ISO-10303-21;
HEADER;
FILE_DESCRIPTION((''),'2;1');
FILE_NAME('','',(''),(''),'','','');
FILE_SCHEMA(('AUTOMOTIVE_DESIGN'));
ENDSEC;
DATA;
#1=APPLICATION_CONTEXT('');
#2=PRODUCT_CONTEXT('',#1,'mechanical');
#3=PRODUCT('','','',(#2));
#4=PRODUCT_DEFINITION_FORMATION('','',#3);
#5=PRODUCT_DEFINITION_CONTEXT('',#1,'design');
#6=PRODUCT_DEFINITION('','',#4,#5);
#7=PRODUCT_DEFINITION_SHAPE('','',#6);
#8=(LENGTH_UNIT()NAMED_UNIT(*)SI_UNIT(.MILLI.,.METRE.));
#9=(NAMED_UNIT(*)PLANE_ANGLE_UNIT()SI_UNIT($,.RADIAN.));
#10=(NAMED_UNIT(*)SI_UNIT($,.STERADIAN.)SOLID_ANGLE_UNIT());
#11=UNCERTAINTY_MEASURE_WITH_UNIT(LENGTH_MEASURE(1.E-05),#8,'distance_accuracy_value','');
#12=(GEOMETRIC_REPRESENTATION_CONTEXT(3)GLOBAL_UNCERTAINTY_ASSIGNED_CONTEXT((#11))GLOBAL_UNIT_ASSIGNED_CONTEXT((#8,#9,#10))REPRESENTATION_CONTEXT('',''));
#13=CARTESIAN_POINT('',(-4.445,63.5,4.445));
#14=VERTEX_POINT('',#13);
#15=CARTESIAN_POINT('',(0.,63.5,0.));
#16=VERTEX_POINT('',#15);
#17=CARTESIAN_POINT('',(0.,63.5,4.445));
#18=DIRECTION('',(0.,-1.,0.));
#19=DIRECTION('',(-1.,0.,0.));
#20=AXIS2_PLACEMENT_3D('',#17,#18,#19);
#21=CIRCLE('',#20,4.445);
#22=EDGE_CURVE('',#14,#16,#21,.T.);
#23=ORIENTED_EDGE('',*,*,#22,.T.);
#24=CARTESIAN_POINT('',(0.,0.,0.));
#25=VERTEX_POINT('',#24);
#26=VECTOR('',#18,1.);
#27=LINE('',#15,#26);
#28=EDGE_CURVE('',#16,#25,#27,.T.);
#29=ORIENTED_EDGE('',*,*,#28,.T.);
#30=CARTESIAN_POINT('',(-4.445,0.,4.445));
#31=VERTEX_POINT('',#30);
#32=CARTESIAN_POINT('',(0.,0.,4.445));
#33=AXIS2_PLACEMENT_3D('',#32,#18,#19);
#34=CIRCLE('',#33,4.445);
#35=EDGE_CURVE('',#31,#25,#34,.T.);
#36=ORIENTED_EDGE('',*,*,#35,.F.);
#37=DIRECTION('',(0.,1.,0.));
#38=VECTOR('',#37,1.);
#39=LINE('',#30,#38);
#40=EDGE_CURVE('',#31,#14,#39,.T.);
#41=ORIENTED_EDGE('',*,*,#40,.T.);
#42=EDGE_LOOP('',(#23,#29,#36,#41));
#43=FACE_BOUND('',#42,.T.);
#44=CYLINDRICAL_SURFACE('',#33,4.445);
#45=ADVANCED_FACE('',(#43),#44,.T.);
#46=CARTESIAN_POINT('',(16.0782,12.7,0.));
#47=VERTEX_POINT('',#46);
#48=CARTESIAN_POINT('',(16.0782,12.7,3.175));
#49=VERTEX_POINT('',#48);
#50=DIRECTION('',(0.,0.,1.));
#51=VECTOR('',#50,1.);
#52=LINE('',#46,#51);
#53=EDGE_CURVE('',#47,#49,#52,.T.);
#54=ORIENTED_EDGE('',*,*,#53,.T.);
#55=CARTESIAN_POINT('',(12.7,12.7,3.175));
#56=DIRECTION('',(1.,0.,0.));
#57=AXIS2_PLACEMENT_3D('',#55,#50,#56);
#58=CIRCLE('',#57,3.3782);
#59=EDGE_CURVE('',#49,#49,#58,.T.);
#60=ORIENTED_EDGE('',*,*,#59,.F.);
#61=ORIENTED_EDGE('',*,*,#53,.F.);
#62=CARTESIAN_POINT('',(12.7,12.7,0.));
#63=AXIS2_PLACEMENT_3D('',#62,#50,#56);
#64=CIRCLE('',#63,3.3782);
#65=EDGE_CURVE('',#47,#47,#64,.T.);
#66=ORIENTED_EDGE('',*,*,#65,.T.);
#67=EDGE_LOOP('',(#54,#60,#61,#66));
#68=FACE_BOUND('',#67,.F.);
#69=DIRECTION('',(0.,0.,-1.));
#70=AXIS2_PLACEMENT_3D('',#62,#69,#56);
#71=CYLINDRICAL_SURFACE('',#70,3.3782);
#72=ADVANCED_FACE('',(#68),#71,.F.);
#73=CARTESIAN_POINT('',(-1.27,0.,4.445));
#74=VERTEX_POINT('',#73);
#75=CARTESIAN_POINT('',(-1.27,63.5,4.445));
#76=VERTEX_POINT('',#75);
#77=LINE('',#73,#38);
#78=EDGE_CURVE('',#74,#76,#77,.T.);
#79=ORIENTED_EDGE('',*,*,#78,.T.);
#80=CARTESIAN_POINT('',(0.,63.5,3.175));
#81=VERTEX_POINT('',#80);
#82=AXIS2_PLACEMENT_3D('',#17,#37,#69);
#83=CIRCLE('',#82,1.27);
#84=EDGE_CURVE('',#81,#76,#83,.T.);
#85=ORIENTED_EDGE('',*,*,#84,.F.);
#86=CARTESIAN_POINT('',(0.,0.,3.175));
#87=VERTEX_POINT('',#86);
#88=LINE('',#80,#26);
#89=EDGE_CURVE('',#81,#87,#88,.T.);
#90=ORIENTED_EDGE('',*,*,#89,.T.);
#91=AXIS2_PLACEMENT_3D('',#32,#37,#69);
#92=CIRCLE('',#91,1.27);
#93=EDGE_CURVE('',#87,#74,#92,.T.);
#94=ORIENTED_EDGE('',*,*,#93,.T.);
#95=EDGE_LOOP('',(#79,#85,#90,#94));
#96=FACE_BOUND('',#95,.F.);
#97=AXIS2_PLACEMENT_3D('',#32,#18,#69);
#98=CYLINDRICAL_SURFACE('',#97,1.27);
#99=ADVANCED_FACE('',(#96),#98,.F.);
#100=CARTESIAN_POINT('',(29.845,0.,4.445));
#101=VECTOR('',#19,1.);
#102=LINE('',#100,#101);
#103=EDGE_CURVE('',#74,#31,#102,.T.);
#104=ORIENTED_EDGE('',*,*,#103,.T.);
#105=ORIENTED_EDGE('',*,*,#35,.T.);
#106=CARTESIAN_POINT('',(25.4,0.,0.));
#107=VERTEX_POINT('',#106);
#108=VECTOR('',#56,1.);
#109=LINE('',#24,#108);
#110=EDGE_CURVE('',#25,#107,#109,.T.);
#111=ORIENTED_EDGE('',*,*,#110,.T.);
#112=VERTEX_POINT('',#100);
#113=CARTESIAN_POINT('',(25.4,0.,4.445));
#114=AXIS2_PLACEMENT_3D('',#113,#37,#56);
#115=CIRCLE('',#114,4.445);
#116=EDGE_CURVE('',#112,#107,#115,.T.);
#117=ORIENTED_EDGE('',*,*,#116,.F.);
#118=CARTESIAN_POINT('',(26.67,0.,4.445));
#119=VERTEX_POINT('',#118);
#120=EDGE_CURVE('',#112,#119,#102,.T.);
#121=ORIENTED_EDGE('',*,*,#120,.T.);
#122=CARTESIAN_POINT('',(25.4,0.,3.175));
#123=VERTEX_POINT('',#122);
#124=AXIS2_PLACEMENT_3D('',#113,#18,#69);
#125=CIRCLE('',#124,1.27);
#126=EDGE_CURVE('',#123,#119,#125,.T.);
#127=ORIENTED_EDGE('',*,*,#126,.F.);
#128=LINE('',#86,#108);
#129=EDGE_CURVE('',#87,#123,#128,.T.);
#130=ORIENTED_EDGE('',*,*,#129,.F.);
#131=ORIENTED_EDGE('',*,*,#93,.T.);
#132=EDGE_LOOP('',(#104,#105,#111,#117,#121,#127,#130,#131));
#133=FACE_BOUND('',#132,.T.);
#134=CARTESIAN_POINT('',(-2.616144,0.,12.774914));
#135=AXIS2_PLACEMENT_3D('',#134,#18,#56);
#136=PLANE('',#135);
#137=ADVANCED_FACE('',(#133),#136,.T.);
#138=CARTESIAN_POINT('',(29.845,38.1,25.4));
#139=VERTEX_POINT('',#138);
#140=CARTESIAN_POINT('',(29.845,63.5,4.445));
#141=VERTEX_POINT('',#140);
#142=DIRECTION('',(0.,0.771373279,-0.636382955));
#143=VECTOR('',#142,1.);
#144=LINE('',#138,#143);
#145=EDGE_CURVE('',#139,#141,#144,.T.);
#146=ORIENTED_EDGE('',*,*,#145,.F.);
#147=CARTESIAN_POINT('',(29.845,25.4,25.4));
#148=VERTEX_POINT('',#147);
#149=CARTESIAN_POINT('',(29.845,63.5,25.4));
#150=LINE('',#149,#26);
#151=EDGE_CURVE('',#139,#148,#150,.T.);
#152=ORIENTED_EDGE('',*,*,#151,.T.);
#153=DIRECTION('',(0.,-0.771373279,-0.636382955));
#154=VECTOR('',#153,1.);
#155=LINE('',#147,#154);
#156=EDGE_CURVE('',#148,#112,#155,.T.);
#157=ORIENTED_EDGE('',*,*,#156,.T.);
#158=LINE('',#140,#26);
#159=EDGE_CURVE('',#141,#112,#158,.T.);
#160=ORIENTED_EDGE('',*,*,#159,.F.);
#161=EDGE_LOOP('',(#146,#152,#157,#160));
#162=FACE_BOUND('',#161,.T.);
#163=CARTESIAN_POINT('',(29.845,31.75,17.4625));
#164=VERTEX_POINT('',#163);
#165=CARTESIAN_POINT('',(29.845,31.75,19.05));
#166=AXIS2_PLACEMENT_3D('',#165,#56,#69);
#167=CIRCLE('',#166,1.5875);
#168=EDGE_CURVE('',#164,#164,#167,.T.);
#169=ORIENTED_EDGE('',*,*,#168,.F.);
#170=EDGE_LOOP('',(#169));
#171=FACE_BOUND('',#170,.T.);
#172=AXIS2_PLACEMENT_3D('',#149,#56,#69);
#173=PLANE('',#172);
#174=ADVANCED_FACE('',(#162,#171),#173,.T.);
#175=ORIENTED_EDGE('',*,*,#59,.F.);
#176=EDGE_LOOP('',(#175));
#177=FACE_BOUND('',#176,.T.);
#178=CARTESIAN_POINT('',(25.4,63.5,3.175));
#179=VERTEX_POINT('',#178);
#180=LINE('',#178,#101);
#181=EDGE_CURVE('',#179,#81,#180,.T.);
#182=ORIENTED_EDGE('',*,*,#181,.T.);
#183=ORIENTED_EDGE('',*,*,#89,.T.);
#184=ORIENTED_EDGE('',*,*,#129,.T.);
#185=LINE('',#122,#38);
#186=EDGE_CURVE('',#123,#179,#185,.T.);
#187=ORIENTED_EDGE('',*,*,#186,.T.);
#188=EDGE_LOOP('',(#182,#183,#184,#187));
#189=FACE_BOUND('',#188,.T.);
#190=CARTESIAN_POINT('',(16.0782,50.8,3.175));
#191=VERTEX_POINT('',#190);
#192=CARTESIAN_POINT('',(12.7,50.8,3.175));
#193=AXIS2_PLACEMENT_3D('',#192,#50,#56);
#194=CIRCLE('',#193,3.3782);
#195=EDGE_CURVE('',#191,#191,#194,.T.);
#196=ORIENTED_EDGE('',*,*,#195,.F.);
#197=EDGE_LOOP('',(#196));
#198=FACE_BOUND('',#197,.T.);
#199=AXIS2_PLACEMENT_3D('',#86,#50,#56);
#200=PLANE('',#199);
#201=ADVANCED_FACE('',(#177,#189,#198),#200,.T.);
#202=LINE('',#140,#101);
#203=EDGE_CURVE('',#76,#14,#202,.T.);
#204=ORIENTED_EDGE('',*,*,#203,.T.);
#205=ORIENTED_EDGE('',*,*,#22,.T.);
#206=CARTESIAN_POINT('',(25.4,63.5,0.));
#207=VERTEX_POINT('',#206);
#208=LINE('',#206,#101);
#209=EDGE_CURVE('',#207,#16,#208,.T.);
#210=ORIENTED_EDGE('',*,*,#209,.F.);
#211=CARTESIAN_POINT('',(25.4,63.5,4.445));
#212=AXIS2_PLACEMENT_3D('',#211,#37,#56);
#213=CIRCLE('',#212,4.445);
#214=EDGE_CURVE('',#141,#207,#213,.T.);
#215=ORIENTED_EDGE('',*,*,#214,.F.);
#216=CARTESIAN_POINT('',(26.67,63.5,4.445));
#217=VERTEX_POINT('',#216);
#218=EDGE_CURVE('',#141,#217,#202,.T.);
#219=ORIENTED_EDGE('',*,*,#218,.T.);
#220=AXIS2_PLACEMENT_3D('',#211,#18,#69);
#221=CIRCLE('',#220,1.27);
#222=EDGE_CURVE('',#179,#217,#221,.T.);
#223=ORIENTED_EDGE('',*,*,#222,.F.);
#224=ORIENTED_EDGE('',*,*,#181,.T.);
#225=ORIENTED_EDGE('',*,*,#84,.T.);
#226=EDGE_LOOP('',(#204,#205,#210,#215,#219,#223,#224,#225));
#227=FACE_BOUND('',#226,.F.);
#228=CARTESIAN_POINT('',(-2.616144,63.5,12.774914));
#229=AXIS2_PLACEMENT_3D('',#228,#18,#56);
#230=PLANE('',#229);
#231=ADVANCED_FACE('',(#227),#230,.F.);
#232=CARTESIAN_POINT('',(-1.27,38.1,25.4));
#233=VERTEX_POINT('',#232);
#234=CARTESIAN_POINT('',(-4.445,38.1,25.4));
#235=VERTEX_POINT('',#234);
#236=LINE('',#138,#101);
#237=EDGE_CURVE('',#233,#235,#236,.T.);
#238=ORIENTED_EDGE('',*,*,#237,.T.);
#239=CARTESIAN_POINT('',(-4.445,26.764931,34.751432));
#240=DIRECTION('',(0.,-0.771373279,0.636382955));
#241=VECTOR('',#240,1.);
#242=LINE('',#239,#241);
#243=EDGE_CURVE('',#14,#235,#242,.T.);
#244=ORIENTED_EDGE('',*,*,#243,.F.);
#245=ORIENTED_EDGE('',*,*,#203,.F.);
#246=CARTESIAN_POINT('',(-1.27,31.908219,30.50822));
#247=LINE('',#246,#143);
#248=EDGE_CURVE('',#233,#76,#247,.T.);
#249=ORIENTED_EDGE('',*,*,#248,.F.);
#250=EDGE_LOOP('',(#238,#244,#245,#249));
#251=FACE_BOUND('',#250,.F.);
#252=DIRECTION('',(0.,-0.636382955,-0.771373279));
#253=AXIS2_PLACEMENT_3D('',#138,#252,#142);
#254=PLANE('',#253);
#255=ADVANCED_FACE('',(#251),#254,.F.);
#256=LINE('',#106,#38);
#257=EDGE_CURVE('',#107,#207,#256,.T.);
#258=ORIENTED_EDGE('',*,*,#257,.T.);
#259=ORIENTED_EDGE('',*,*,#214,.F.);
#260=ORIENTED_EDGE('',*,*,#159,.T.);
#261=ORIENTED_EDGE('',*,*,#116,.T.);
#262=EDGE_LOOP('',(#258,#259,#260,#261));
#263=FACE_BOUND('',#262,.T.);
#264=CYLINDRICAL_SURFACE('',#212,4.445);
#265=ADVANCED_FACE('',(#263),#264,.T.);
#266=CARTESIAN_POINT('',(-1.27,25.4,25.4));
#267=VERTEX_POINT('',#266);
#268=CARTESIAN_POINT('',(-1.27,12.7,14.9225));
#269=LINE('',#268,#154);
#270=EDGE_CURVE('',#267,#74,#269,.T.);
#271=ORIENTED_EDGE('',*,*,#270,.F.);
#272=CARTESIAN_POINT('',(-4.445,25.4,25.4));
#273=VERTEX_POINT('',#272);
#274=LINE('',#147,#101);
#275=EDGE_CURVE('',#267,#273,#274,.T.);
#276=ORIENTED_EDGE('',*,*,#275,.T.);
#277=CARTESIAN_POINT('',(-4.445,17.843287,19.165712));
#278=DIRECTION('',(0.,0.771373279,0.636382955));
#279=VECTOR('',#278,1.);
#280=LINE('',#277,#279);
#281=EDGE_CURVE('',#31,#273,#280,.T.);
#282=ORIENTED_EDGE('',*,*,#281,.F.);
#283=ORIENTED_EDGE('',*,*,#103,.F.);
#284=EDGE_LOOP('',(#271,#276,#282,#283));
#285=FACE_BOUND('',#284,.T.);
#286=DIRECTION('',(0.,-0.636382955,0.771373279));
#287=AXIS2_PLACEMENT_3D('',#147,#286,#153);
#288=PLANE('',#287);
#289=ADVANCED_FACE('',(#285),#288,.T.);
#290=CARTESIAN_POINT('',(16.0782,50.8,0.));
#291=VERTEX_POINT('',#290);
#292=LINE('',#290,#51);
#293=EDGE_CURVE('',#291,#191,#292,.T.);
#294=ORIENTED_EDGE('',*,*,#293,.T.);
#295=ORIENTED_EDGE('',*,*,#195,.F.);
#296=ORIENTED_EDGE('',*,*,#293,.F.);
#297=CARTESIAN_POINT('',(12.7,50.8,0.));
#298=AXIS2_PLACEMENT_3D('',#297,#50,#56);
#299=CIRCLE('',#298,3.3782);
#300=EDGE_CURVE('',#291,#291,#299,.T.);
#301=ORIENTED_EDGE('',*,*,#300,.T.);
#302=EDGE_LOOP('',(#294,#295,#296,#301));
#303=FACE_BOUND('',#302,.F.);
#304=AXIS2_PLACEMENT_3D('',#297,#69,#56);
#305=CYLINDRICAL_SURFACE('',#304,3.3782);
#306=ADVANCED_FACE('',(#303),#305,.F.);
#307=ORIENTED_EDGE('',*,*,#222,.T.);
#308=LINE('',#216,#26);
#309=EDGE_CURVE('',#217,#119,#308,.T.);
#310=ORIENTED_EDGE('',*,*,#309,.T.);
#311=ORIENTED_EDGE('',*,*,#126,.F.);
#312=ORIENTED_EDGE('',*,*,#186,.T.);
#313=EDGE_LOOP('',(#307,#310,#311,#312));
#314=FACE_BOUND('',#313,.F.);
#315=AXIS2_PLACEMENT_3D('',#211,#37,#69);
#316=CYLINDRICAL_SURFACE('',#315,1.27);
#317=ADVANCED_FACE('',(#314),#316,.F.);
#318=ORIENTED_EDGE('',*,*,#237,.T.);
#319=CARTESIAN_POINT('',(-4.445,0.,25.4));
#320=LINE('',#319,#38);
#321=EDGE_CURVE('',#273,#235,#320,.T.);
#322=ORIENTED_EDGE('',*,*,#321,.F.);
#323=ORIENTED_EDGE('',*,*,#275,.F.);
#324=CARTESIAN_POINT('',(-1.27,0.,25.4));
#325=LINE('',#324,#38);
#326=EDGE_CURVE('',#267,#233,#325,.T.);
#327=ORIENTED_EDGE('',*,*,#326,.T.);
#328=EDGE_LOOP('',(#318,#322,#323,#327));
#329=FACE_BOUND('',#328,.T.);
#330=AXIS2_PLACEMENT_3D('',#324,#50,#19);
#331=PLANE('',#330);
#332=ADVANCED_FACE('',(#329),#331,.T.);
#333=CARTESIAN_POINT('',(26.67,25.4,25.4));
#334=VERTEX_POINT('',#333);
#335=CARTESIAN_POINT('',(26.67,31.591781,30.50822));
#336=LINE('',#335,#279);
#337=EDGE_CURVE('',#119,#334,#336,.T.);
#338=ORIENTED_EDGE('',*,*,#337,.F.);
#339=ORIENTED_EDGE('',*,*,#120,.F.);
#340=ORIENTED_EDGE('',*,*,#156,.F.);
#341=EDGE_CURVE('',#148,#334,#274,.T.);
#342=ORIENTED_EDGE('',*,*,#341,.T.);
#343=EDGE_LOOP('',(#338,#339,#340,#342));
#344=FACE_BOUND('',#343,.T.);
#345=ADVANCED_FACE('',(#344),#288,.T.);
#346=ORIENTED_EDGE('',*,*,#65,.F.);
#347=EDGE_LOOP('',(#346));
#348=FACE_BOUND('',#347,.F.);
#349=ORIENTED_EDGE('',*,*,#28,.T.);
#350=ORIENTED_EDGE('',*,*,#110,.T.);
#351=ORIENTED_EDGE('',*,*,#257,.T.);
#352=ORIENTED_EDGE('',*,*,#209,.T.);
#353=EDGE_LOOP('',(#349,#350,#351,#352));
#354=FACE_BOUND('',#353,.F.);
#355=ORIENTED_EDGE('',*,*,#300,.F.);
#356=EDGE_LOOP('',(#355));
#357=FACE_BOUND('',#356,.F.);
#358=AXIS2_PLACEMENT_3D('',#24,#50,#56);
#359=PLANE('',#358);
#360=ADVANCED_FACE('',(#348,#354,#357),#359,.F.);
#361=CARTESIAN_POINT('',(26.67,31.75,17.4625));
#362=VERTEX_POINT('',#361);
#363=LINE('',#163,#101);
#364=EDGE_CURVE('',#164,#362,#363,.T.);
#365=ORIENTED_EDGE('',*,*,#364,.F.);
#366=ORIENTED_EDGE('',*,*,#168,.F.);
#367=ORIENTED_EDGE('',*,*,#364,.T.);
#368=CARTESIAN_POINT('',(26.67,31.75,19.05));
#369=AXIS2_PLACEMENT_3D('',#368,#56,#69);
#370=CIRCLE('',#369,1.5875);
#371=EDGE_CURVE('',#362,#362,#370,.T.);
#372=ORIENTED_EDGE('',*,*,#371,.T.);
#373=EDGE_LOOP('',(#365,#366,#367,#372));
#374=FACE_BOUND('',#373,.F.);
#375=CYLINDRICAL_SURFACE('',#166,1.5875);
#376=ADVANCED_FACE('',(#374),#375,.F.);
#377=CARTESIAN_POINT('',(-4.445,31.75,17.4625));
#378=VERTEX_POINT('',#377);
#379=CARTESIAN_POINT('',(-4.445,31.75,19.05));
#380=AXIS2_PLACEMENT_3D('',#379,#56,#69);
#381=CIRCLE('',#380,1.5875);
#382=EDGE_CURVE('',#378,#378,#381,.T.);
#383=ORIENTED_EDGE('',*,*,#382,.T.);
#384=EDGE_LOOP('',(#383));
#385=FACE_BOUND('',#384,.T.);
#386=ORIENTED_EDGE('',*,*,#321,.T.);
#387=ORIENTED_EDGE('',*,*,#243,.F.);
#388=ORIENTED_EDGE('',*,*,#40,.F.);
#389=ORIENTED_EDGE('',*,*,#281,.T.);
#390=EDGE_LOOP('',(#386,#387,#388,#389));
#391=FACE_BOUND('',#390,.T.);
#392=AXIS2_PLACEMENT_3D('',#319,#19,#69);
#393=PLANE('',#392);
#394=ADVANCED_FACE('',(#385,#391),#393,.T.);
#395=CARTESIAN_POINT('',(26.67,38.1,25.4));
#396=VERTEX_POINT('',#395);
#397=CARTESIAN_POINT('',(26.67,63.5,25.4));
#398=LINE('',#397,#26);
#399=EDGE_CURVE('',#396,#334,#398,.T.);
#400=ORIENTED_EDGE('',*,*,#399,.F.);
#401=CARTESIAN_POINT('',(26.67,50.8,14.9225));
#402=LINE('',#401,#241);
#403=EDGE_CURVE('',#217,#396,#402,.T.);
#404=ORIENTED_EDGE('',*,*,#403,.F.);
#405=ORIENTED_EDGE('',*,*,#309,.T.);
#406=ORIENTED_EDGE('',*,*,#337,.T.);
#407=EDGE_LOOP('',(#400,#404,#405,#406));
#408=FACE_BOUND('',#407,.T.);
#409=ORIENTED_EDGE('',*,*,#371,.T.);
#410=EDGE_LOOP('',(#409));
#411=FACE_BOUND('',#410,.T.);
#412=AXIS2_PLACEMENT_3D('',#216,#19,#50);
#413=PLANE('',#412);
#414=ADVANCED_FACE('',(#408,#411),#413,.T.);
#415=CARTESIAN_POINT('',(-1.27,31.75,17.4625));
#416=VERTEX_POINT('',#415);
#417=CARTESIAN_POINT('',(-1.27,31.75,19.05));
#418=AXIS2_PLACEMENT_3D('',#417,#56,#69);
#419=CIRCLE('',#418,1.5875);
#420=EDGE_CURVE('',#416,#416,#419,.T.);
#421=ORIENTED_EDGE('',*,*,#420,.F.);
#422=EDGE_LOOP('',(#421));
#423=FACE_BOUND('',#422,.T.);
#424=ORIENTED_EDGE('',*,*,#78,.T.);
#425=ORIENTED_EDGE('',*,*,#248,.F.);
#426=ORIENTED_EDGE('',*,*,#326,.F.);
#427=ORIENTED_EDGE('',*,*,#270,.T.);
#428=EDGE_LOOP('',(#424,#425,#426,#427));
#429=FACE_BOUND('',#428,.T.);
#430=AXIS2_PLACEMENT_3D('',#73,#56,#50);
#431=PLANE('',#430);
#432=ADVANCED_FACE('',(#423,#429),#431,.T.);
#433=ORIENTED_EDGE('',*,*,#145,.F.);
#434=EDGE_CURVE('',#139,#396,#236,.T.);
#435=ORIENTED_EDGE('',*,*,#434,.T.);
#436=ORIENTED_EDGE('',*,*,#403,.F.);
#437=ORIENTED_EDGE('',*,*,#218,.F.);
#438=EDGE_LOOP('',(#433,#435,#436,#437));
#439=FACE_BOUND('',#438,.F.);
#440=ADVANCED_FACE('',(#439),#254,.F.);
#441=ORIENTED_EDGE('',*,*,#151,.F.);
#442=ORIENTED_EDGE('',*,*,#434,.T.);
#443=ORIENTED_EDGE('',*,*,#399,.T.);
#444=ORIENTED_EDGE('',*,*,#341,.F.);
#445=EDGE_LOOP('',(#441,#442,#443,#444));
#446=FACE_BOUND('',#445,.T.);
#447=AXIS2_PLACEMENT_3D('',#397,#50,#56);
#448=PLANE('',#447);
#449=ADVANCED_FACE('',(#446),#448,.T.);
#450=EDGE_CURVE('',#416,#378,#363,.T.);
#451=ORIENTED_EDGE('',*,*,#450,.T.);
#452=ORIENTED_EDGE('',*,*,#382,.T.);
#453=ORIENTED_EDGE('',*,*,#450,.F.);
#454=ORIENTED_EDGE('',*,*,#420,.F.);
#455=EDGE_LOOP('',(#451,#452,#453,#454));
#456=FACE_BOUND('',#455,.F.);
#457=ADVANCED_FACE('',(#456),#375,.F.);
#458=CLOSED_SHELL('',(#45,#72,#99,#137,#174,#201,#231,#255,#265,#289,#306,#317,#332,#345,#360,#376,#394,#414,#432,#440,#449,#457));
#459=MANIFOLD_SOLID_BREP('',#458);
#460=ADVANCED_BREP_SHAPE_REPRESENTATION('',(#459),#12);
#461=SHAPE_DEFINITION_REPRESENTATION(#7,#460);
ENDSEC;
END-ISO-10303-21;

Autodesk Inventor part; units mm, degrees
ref_plane "YZ Plane" through (0, 0, 0) normal (1, 0, 0) x (0, 1, 0)
ref_plane "XZ Plane" through (0, 0, 0) normal (0, 1, 0) x (-1, 0, 0)
ref_plane "XY Plane" through (0, 0, 0) normal (0, 0, 1) x (1, 0, 0)
sketch "Sketch1" plane through (0, 0, 0) normal (0, 0, 1) x (1, 0, 0)
  line L0 (0, 0) -> (25.4, 0)
  line L1 (25.4, 0) -> (25.4, 63.5)
  line L2 (25.4, 63.5) -> (0, 63.5)
  line L3 (0, 63.5) -> (0, 0)
  circle A0 centre (12.7, 50.8) radius 3.3782
  circle A1 centre (12.7, 12.7) radius 3.3782
  dimension "d0" = 25.4
  dimension "d1" = 63.5
  dimension "d2" = 6.7564
  dimension "d3" = 6.7564
  dimension "d4" = 12.7
  dimension "d5" = 12.7
  dimension "d6" = 12.7
  dimension "d7" = 12.7
extrude "Plate1" add sketch "Sketch1" along normal blind 3.175
sketch "Sketch2" plane through (26.67, 63.5, 4.445) normal (1, 0, 0) x (0, 1, 0)
  line L0 (-63.5, 0) -> (0, 0)
  line L1 (0, 0) -> (0, 20.955)
  line L2 (0, 20.955) -> (-63.5, 20.955)
  line L3 (-63.5, 20.955) -> (-63.5, 0)
edge flange "Flange1" height 25.4 angle 90 thickness 3.175 bend radius 1.27 thickness toward (1, 0, 0) relief tear relief width 3.175 relief depth 1.5875 edges at (25.4, 31.75, 3.175) wall of the first edge with corners at (26.67, 0, 4.445) (26.67, 63.5, 4.445) (26.67, 63.5, 25.4) (26.67, 0, 25.4)
bend "Bend1"
corner "Corner1"
sketch "Sketch3" plane through (29.845, 0, 25.4) normal (1, 0, 0) x (0, 0, -1)
  line L0 (0, 63.5) -> (20.955, 63.5) projected
  line L1 (0, 0) -> (0, 63.5) projected
  line L2 (20.955, 0) -> (0, 0) projected
  circle A0 centre (6.35, 31.75) radius 1.5875
  line L3 (0, 38.1) -> (20.955, 63.5)
  line L4 (0, 25.4) -> (20.955, 0)
  point P0 (25.4, 0)
  dimension "d19" = 3.175
  dimension "d20" = 6.35
  dimension "d21" = 31.75
  dimension "d22" = 12.7
  dimension "d23" = 25.4
sketch "Sketch4" plane through (-1.27, 0, 4.445) normal (-1, 0, 0) x (0, -1, 0)
  line L0 (-63.5, 0) -> (0, 0)
  line L1 (0, 0) -> (0, 20.955)
  line L2 (0, 20.955) -> (-63.5, 20.955)
  line L3 (-63.5, 20.955) -> (-63.5, 0)
edge flange "Flange2" height 25.4 angle 90 thickness 3.175 bend radius 1.27 thickness toward (-1, 0, 0) relief tear relief width 3.175 relief depth 1.5875 edges at (0, 31.75, 3.175) wall of the first edge with corners at (-1.27, 63.5, 4.445) (-1.27, 0, 4.445) (-1.27, 0, 25.4) (-1.27, 63.5, 25.4)
bend "Bend2"
corner "Corner2"
extrude "Extrusion1" cut sketch "Sketch3" against normal blind 76.2
equation "\"d9\" = BendReliefWidth"
equation "\"d10\" = BendReliefDepth"
equation "\"d11\" = MinimumRemnant"
equation "\"d12\" = BendRadius"
equation "\"d16\" = CornerReliefSize"
equation "\"d17\" = GapSize"
equation "\"d18\" = JacobiRadiusSize"
equation "\"d26\" = BendReliefWidth"
equation "\"d27\" = BendReliefDepth"
equation "\"d28\" = MinimumRemnant"
equation "\"d29\" = BendRadius"
equation "\"d33\" = CornerReliefSize"
equation "\"d34\" = GapSize"
equation "\"d35\" = JacobiRadiusSize"
equation "\"BendRadius\" = Thickness"
equation "\"BendReliefWidth\" = Thickness"
equation "\"BendReliefDepth\" = 0.5 * Thickness"
equation "\"CornerReliefSize\" = 4 * Thickness"
equation "\"MinimumRemnant\" = 2 * Thickness"
equation "\"TransitionRadius\" = BendRadius"
equation "\"JacobiRadiusSize\" = BendRadius"
equation "\"GapSize\" = Thickness"
equation "\"d8\" = BendRadius"
equation "\"Thickness\" = 3.175"
properties part number "BackPistonHinge-Tower"
